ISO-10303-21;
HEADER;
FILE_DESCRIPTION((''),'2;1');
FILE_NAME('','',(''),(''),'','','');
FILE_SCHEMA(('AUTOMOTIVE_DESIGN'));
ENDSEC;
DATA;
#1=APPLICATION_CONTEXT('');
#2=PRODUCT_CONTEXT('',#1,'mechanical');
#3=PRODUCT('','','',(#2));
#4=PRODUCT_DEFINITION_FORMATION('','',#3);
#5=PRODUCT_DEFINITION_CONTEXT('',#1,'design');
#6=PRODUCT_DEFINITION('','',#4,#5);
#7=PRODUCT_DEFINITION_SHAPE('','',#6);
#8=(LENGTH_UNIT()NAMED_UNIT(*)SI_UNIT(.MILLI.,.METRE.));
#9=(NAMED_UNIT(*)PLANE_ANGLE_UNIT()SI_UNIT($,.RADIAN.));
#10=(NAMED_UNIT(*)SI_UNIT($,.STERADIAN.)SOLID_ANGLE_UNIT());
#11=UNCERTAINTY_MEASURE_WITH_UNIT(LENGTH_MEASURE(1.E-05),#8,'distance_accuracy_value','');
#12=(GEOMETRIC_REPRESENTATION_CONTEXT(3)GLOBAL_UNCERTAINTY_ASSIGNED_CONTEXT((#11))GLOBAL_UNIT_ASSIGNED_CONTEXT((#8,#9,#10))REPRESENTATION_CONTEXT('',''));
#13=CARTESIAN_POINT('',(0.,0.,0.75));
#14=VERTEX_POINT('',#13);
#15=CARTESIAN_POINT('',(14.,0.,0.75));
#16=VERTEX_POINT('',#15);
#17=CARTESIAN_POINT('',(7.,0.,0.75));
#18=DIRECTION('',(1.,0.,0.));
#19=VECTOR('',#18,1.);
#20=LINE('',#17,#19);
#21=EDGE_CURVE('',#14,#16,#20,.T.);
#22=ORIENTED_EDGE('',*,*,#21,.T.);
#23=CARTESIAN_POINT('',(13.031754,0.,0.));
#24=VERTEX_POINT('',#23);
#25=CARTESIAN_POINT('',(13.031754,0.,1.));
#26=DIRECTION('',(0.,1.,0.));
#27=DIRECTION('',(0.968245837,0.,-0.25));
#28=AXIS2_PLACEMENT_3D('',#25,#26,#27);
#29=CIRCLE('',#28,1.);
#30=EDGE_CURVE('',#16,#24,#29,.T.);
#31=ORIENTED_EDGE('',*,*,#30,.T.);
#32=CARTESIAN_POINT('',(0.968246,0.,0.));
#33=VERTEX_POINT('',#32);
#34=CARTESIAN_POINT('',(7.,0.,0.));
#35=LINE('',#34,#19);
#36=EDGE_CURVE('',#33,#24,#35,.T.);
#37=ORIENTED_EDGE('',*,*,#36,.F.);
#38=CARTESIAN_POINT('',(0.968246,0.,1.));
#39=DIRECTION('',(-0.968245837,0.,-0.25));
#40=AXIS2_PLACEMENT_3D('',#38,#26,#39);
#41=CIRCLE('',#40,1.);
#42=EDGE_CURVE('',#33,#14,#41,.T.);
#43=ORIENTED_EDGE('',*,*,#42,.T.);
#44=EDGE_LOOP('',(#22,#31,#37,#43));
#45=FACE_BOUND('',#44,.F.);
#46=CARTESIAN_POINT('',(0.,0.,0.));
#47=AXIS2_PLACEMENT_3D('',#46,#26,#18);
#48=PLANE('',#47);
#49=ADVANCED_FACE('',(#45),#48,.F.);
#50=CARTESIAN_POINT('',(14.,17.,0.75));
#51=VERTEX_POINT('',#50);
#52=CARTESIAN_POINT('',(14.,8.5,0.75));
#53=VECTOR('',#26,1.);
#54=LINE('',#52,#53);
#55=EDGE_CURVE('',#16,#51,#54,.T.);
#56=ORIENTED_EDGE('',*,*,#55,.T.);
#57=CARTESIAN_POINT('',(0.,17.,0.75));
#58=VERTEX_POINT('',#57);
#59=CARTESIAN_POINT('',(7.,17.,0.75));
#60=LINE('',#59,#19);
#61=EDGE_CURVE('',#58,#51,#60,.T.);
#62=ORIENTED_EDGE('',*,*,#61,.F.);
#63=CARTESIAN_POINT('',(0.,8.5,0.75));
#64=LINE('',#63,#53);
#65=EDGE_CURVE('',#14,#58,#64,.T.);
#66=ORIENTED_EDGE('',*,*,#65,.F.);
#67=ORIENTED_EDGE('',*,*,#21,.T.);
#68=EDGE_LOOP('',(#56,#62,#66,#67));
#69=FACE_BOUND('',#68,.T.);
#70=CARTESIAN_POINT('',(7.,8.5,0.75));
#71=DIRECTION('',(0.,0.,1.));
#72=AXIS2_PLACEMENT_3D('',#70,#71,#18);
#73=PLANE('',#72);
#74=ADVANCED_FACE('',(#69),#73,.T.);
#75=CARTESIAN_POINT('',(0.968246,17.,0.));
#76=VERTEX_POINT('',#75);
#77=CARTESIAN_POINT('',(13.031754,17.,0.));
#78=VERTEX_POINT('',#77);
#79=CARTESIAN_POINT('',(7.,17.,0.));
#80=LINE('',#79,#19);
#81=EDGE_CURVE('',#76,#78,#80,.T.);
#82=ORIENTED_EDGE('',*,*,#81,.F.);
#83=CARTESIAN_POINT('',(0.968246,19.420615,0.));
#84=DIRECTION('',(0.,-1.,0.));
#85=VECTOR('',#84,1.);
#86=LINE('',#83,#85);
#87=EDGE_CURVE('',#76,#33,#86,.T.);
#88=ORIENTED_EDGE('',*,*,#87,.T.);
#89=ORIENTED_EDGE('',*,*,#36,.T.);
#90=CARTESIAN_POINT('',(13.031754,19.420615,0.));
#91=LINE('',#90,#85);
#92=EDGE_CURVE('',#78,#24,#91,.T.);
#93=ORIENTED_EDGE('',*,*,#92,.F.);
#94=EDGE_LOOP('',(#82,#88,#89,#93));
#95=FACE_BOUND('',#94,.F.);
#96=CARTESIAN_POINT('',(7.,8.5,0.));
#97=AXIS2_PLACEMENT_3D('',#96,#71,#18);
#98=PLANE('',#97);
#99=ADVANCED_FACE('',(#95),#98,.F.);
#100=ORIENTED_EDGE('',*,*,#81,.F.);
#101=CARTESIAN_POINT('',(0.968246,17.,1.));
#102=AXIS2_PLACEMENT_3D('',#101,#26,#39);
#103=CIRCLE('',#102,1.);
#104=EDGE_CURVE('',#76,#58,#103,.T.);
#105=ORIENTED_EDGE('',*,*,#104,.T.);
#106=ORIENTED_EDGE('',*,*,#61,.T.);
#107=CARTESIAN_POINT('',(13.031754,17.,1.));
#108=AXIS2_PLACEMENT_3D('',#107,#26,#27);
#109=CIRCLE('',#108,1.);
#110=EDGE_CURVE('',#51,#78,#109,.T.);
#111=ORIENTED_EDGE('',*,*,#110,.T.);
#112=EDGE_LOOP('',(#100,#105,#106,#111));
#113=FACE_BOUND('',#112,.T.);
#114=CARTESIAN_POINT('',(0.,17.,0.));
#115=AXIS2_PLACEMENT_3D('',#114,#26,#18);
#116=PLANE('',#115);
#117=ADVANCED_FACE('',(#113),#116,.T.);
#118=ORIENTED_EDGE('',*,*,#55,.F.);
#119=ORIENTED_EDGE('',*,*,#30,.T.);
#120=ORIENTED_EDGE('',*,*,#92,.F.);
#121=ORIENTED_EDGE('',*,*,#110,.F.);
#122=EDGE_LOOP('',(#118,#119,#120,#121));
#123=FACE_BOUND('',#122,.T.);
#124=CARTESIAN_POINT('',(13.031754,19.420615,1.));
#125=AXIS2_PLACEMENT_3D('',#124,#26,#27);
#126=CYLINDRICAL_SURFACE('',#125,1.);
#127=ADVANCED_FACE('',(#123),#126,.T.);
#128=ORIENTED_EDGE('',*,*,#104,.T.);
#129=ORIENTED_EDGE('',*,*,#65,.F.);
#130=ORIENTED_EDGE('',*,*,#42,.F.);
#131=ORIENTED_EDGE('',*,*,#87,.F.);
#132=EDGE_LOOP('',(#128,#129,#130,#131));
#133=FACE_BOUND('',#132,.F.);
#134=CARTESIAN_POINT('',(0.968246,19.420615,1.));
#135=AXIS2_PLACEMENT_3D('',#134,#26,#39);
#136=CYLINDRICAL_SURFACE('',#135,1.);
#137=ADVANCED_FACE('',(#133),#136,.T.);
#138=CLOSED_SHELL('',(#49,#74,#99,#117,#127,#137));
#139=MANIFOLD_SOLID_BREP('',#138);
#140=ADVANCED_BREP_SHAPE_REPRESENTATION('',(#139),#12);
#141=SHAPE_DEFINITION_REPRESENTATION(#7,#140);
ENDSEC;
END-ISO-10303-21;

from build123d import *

# Parameters (mm, degrees)
F0_W        = 14
F0_H        = 17
F1_DEPTH    = 0.75
F2_T1_DEPTH = 21.8412291828


# Not quite as in the source:
# - a fillet or chamfer that OpenCascade refuses, or shapes differently, is made with other operations: its cross-section is extruded or revolved along the edge and cut away or added


with BuildPart() as f1:
    # F0 (on Top) → F1 (new body)
    with BuildSketch(Plane.XY):
        with Locations((7, 8.5)):
            Rectangle(F0_W, F0_H)
    extrude(amount=F1_DEPTH)

    # F2: fillet of radius 1 on 2 edges, made by hand

    # F2_s2 → F2_t1 (cut)
    with BuildSketch(Plane.XZ.offset(-19.4206145914)):
        with BuildLine():
            ThreePointArc((14, 0.75), (13.6441265991, 0.209430585), (13.0317541634, 0))
            Line((13.0317541634, 0), (14, 0))
            Line((14, 0), (14, 0.75))
        make_face()
        with BuildLine():
            ThreePointArc((0, 0.75), (0.3558734009, 0.209430585), (0.9682458366, 0))
            Line((0.9682458366, 0), (0, 0))
            Line((0, 0), (0, 0.75))
        make_face()
    extrude(amount=F2_T1_DEPTH, mode=Mode.SUBTRACT)


solid = f1.part
